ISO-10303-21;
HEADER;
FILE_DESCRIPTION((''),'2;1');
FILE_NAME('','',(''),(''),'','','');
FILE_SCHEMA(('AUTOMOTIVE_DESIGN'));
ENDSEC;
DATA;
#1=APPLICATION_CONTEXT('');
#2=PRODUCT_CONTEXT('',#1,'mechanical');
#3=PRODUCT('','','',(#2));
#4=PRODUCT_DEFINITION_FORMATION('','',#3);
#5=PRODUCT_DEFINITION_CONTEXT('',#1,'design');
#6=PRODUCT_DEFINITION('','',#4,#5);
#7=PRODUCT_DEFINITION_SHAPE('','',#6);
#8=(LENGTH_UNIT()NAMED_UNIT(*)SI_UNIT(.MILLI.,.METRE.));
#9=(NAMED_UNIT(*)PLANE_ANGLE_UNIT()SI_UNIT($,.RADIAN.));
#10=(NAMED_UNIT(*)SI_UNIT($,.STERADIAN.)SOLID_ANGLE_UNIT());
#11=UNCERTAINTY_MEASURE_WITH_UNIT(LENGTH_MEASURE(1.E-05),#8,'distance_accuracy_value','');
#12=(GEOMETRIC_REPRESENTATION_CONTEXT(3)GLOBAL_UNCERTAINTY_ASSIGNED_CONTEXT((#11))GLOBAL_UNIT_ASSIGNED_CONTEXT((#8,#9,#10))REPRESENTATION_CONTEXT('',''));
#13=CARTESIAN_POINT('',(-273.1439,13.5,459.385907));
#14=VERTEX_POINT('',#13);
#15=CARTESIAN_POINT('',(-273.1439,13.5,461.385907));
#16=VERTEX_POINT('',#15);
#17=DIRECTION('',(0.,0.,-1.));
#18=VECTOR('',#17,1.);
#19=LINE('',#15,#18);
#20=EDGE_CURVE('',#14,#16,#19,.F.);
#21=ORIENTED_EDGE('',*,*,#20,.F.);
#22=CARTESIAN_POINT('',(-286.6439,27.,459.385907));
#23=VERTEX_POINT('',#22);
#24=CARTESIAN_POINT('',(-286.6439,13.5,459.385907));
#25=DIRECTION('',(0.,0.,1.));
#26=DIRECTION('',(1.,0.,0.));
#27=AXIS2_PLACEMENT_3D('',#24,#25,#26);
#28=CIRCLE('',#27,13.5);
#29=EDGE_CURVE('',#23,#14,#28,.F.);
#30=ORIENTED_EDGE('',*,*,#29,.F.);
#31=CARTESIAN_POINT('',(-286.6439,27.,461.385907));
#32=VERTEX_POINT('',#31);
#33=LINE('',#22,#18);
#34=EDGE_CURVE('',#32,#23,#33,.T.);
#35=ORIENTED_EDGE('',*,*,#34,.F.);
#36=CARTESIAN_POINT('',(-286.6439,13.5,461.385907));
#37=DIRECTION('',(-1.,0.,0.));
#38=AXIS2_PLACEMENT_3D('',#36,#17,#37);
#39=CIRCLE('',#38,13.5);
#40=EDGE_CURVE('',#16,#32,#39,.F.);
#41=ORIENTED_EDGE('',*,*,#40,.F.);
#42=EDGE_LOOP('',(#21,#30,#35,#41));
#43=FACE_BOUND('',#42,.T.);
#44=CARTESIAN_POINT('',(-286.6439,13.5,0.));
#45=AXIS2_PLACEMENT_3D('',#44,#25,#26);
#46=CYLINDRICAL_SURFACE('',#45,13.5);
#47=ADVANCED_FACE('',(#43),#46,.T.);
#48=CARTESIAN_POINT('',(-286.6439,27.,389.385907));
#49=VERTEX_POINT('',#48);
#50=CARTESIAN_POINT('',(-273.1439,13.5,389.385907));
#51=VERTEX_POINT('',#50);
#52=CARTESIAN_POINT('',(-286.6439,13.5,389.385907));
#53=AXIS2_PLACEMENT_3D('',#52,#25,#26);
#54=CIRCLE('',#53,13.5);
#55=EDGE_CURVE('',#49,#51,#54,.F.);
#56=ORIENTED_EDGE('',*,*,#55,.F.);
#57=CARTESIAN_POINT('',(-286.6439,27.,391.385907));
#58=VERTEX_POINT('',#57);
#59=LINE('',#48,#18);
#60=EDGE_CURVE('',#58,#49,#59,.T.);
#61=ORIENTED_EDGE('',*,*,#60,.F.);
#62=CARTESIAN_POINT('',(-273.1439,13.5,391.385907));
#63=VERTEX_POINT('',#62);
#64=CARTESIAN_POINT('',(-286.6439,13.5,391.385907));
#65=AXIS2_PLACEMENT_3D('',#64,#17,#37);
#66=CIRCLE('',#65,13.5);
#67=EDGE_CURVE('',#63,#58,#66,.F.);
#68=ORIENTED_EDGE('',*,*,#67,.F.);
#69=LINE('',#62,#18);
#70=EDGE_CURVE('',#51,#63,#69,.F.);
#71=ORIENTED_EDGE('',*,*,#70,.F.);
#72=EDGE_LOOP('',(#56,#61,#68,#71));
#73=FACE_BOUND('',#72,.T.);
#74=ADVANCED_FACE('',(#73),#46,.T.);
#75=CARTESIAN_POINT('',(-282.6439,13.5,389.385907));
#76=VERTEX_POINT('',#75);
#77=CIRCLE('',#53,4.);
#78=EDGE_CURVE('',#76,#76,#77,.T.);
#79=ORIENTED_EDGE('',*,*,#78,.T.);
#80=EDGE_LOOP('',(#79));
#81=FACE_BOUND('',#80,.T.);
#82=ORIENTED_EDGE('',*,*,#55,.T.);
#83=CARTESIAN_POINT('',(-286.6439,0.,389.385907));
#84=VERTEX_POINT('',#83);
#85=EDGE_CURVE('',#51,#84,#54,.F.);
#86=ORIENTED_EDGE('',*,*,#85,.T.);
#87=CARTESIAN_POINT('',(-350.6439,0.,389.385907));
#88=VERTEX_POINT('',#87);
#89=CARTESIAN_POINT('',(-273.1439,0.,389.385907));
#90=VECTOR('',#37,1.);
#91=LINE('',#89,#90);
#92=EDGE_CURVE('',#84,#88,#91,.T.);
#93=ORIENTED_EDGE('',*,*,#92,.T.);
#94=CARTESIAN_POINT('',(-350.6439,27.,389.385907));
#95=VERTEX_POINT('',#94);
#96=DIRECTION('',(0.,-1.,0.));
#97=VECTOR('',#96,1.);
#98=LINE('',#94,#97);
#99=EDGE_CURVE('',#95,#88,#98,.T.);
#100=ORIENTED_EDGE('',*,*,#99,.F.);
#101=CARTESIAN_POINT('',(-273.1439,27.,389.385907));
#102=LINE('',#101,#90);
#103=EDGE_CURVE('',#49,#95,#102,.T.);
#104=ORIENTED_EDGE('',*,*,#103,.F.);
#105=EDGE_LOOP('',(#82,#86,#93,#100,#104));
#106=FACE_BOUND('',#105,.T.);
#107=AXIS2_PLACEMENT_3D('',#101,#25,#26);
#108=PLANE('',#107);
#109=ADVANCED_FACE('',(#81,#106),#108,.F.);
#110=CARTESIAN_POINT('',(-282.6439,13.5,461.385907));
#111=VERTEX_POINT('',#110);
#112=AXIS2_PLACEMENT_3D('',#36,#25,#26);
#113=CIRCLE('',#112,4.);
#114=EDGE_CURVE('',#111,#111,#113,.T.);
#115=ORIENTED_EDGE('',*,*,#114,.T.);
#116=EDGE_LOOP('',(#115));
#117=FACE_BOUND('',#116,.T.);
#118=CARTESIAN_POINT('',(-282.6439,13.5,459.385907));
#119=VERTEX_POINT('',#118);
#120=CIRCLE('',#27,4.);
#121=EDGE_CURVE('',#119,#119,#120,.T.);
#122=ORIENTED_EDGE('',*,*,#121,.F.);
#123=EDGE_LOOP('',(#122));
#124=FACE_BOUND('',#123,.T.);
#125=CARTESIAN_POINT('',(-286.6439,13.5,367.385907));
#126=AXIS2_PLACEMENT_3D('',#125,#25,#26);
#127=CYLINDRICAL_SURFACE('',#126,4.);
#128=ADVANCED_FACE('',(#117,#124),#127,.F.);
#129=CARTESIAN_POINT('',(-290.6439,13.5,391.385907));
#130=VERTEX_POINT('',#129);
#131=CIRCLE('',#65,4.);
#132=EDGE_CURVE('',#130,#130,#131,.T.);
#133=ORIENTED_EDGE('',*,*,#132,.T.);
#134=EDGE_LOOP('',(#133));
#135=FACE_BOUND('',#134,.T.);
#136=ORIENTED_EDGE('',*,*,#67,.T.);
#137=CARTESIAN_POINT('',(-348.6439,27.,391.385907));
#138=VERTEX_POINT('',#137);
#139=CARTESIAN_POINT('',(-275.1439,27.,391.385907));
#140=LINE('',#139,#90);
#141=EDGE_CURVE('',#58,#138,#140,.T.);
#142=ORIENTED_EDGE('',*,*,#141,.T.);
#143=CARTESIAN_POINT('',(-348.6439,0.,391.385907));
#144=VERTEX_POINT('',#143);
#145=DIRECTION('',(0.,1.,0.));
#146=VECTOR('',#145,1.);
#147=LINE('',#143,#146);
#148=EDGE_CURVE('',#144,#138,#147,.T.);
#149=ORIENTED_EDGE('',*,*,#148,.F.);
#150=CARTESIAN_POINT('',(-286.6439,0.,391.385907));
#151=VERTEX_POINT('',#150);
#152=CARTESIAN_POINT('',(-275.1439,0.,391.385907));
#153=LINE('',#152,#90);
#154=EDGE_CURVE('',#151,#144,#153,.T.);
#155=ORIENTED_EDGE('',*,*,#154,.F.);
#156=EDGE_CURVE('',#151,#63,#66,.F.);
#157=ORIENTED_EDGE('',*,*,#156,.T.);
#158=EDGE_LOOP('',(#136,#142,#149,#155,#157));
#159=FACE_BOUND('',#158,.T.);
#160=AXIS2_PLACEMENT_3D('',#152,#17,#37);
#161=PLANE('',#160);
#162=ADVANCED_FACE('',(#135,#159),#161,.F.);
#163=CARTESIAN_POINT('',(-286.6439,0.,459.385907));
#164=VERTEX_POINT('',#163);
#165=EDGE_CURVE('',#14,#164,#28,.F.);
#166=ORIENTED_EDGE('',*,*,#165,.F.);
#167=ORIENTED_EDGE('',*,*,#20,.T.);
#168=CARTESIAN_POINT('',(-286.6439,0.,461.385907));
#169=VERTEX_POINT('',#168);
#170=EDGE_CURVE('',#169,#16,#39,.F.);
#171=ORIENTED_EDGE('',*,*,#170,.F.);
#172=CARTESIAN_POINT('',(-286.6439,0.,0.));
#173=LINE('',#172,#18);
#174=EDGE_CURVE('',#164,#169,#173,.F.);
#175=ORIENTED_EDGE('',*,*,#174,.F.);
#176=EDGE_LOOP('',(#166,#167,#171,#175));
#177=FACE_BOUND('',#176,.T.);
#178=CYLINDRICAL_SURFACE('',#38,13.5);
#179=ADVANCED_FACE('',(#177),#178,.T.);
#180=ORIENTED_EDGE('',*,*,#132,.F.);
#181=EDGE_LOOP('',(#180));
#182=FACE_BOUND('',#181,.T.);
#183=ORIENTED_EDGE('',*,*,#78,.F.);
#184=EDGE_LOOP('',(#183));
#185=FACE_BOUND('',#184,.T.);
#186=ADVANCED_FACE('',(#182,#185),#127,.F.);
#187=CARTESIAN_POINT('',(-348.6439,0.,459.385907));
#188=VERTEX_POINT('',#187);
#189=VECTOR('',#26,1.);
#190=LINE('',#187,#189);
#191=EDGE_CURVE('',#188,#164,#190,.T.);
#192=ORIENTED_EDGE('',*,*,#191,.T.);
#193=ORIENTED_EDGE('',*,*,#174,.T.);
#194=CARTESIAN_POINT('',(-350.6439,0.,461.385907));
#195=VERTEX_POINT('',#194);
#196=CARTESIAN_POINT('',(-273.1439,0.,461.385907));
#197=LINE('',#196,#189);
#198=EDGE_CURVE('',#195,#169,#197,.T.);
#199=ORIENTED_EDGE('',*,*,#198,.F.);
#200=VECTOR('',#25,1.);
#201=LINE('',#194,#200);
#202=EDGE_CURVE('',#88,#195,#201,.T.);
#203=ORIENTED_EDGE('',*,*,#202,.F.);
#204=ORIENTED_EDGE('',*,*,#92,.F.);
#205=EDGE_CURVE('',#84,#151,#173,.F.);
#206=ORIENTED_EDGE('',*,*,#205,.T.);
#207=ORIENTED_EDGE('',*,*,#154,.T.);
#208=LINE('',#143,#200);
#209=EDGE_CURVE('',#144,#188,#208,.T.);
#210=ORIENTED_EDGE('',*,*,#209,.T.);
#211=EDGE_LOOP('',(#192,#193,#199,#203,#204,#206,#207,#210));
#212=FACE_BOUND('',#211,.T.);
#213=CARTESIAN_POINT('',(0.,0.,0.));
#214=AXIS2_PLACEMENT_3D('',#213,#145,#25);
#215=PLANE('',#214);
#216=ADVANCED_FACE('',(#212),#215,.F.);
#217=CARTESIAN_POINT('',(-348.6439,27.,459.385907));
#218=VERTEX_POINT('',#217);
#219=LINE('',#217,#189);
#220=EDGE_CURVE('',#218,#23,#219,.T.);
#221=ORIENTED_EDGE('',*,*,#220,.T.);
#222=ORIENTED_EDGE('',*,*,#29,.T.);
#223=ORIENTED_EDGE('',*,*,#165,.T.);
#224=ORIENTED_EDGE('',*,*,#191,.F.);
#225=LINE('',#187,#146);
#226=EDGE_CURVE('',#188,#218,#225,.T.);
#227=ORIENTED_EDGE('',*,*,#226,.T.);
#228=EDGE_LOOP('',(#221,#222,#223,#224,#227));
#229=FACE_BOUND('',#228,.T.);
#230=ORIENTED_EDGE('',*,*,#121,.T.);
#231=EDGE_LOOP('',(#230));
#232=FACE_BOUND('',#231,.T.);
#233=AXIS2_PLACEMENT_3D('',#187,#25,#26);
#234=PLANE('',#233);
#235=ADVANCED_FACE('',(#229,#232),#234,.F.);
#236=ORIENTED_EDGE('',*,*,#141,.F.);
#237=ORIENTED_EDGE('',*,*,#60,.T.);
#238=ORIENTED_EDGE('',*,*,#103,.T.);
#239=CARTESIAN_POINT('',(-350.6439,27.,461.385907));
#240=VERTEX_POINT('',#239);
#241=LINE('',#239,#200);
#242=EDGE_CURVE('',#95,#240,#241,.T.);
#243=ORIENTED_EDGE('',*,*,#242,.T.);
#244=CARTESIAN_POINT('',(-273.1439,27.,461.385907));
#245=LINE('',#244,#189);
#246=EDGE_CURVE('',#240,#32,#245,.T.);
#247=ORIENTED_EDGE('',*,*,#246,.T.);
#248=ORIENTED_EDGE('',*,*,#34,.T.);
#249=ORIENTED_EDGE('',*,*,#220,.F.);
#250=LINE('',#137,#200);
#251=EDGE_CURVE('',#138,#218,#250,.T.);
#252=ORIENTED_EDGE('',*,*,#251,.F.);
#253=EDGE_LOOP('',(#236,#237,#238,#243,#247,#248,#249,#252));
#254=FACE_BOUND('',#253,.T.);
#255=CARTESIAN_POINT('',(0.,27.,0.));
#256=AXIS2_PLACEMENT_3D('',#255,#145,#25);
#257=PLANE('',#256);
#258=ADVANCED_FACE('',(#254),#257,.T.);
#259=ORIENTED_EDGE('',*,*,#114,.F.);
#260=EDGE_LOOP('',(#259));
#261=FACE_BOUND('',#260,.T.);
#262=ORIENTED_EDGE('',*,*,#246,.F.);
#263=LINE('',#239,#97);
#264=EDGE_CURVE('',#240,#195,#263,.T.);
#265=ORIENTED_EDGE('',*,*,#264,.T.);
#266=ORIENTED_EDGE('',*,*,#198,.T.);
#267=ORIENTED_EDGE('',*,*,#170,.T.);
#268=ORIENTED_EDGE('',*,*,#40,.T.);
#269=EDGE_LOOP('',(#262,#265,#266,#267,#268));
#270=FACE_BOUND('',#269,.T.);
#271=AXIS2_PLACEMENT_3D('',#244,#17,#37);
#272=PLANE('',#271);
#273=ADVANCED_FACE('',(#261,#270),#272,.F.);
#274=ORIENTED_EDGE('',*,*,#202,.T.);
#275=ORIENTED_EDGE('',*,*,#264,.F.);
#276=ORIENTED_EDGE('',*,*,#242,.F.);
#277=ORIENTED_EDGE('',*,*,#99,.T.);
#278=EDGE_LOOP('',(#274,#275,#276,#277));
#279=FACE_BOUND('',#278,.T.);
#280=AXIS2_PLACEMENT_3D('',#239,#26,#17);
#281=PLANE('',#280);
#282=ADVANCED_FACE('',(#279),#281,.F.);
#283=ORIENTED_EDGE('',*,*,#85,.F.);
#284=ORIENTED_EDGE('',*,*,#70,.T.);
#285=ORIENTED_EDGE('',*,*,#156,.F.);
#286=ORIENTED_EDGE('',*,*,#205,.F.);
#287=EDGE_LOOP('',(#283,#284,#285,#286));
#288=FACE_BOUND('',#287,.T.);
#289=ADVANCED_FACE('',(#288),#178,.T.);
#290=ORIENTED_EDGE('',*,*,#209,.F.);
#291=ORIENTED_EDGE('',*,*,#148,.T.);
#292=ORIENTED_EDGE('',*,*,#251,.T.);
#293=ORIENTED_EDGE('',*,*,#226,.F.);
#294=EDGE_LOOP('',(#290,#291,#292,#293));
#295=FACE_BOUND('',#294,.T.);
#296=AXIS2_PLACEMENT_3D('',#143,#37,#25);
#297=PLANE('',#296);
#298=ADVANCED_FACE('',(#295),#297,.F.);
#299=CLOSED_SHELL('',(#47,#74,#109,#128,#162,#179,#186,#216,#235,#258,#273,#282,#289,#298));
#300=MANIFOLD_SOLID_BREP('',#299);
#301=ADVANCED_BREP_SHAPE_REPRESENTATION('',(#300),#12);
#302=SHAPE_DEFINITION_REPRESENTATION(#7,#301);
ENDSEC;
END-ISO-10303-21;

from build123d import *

# Parameters (mm, degrees)
SKETCH1_W           = 77.5
SKETCH1_H           = 72
BOSS_EXTRUDE2_DEPTH = 27
SKETCH2_W           = 73.5
SKETCH2_H           = 68
CUT_EXTRUDE1_DEPTH  = 27
SKETCH7_W           = 2
SKETCH7_H           = 68
CUT_EXTRUDE2_DEPTH  = 27
FILLET6_R           = 13.5
FILLET7_R           = 13.5
SKETCH9_R           = 4
CUT_EXTRUDE3_DEPTH  = 94


with BuildPart() as part:
    # Sketch1 → Boss-Extrude2 (new body)
    with BuildSketch(Plane(origin=(0, 0, 0), x_dir=(1, 0, 0), z_dir=(0, 1, 0))):
        with Locations((-311.893899893, -425.385906876)):
            Rectangle(SKETCH1_W, SKETCH1_H)
    extrude(amount=BOSS_EXTRUDE2_DEPTH)

    # Sketch2 → Cut-Extrude1 (cut)
    with BuildSketch(Plane(origin=(0, 27, 0), x_dir=(1, 0, 0), z_dir=(0, 1, 0))):
        with Locations((-311.893899893, -425.385906876)):
            Rectangle(SKETCH2_W, SKETCH2_H)
    extrude(amount=-CUT_EXTRUDE1_DEPTH, mode=Mode.SUBTRACT)

    # Sketch7 → Cut-Extrude2 (cut)
    with BuildSketch(Plane(origin=(0, 27, 0), x_dir=(1, 0, 0), z_dir=(0, 1, 0))):
        with Locations((-274.143899893, -425.385906876)):
            Rectangle(SKETCH7_W, SKETCH7_H)
    extrude(amount=-CUT_EXTRUDE2_DEPTH, mode=Mode.SUBTRACT)

    # Fillet6
    fillet6_edges = [part.edges().sort_by_distance(p)[0] for p in [
        (-273.143899893, 0, 460.385906876),
        (-273.143899893, 27, 460.385906876),
    ]]
    fillet(fillet6_edges, radius=FILLET6_R - 0.0001)  # a hair under: the kernel refuses the full size

    # Fillet7
    fillet7_edges = [part.edges().sort_by_distance(p)[0] for p in [
        (-273.143899893, 0, 390.385906876),
        (-273.143899893, 27, 390.385906876),
    ]]
    fillet(fillet7_edges, radius=FILLET7_R - 0.0001)  # a hair under: the kernel refuses the full size

    # Sketch9 → Cut-Extrude3 (cut)
    with BuildSketch(Plane.XY.offset(461.385906876)):
        with Locations((-286.643899893, 13.5)):
            Circle(SKETCH9_R)
    extrude(amount=-CUT_EXTRUDE3_DEPTH, mode=Mode.SUBTRACT)


solid = part.part
